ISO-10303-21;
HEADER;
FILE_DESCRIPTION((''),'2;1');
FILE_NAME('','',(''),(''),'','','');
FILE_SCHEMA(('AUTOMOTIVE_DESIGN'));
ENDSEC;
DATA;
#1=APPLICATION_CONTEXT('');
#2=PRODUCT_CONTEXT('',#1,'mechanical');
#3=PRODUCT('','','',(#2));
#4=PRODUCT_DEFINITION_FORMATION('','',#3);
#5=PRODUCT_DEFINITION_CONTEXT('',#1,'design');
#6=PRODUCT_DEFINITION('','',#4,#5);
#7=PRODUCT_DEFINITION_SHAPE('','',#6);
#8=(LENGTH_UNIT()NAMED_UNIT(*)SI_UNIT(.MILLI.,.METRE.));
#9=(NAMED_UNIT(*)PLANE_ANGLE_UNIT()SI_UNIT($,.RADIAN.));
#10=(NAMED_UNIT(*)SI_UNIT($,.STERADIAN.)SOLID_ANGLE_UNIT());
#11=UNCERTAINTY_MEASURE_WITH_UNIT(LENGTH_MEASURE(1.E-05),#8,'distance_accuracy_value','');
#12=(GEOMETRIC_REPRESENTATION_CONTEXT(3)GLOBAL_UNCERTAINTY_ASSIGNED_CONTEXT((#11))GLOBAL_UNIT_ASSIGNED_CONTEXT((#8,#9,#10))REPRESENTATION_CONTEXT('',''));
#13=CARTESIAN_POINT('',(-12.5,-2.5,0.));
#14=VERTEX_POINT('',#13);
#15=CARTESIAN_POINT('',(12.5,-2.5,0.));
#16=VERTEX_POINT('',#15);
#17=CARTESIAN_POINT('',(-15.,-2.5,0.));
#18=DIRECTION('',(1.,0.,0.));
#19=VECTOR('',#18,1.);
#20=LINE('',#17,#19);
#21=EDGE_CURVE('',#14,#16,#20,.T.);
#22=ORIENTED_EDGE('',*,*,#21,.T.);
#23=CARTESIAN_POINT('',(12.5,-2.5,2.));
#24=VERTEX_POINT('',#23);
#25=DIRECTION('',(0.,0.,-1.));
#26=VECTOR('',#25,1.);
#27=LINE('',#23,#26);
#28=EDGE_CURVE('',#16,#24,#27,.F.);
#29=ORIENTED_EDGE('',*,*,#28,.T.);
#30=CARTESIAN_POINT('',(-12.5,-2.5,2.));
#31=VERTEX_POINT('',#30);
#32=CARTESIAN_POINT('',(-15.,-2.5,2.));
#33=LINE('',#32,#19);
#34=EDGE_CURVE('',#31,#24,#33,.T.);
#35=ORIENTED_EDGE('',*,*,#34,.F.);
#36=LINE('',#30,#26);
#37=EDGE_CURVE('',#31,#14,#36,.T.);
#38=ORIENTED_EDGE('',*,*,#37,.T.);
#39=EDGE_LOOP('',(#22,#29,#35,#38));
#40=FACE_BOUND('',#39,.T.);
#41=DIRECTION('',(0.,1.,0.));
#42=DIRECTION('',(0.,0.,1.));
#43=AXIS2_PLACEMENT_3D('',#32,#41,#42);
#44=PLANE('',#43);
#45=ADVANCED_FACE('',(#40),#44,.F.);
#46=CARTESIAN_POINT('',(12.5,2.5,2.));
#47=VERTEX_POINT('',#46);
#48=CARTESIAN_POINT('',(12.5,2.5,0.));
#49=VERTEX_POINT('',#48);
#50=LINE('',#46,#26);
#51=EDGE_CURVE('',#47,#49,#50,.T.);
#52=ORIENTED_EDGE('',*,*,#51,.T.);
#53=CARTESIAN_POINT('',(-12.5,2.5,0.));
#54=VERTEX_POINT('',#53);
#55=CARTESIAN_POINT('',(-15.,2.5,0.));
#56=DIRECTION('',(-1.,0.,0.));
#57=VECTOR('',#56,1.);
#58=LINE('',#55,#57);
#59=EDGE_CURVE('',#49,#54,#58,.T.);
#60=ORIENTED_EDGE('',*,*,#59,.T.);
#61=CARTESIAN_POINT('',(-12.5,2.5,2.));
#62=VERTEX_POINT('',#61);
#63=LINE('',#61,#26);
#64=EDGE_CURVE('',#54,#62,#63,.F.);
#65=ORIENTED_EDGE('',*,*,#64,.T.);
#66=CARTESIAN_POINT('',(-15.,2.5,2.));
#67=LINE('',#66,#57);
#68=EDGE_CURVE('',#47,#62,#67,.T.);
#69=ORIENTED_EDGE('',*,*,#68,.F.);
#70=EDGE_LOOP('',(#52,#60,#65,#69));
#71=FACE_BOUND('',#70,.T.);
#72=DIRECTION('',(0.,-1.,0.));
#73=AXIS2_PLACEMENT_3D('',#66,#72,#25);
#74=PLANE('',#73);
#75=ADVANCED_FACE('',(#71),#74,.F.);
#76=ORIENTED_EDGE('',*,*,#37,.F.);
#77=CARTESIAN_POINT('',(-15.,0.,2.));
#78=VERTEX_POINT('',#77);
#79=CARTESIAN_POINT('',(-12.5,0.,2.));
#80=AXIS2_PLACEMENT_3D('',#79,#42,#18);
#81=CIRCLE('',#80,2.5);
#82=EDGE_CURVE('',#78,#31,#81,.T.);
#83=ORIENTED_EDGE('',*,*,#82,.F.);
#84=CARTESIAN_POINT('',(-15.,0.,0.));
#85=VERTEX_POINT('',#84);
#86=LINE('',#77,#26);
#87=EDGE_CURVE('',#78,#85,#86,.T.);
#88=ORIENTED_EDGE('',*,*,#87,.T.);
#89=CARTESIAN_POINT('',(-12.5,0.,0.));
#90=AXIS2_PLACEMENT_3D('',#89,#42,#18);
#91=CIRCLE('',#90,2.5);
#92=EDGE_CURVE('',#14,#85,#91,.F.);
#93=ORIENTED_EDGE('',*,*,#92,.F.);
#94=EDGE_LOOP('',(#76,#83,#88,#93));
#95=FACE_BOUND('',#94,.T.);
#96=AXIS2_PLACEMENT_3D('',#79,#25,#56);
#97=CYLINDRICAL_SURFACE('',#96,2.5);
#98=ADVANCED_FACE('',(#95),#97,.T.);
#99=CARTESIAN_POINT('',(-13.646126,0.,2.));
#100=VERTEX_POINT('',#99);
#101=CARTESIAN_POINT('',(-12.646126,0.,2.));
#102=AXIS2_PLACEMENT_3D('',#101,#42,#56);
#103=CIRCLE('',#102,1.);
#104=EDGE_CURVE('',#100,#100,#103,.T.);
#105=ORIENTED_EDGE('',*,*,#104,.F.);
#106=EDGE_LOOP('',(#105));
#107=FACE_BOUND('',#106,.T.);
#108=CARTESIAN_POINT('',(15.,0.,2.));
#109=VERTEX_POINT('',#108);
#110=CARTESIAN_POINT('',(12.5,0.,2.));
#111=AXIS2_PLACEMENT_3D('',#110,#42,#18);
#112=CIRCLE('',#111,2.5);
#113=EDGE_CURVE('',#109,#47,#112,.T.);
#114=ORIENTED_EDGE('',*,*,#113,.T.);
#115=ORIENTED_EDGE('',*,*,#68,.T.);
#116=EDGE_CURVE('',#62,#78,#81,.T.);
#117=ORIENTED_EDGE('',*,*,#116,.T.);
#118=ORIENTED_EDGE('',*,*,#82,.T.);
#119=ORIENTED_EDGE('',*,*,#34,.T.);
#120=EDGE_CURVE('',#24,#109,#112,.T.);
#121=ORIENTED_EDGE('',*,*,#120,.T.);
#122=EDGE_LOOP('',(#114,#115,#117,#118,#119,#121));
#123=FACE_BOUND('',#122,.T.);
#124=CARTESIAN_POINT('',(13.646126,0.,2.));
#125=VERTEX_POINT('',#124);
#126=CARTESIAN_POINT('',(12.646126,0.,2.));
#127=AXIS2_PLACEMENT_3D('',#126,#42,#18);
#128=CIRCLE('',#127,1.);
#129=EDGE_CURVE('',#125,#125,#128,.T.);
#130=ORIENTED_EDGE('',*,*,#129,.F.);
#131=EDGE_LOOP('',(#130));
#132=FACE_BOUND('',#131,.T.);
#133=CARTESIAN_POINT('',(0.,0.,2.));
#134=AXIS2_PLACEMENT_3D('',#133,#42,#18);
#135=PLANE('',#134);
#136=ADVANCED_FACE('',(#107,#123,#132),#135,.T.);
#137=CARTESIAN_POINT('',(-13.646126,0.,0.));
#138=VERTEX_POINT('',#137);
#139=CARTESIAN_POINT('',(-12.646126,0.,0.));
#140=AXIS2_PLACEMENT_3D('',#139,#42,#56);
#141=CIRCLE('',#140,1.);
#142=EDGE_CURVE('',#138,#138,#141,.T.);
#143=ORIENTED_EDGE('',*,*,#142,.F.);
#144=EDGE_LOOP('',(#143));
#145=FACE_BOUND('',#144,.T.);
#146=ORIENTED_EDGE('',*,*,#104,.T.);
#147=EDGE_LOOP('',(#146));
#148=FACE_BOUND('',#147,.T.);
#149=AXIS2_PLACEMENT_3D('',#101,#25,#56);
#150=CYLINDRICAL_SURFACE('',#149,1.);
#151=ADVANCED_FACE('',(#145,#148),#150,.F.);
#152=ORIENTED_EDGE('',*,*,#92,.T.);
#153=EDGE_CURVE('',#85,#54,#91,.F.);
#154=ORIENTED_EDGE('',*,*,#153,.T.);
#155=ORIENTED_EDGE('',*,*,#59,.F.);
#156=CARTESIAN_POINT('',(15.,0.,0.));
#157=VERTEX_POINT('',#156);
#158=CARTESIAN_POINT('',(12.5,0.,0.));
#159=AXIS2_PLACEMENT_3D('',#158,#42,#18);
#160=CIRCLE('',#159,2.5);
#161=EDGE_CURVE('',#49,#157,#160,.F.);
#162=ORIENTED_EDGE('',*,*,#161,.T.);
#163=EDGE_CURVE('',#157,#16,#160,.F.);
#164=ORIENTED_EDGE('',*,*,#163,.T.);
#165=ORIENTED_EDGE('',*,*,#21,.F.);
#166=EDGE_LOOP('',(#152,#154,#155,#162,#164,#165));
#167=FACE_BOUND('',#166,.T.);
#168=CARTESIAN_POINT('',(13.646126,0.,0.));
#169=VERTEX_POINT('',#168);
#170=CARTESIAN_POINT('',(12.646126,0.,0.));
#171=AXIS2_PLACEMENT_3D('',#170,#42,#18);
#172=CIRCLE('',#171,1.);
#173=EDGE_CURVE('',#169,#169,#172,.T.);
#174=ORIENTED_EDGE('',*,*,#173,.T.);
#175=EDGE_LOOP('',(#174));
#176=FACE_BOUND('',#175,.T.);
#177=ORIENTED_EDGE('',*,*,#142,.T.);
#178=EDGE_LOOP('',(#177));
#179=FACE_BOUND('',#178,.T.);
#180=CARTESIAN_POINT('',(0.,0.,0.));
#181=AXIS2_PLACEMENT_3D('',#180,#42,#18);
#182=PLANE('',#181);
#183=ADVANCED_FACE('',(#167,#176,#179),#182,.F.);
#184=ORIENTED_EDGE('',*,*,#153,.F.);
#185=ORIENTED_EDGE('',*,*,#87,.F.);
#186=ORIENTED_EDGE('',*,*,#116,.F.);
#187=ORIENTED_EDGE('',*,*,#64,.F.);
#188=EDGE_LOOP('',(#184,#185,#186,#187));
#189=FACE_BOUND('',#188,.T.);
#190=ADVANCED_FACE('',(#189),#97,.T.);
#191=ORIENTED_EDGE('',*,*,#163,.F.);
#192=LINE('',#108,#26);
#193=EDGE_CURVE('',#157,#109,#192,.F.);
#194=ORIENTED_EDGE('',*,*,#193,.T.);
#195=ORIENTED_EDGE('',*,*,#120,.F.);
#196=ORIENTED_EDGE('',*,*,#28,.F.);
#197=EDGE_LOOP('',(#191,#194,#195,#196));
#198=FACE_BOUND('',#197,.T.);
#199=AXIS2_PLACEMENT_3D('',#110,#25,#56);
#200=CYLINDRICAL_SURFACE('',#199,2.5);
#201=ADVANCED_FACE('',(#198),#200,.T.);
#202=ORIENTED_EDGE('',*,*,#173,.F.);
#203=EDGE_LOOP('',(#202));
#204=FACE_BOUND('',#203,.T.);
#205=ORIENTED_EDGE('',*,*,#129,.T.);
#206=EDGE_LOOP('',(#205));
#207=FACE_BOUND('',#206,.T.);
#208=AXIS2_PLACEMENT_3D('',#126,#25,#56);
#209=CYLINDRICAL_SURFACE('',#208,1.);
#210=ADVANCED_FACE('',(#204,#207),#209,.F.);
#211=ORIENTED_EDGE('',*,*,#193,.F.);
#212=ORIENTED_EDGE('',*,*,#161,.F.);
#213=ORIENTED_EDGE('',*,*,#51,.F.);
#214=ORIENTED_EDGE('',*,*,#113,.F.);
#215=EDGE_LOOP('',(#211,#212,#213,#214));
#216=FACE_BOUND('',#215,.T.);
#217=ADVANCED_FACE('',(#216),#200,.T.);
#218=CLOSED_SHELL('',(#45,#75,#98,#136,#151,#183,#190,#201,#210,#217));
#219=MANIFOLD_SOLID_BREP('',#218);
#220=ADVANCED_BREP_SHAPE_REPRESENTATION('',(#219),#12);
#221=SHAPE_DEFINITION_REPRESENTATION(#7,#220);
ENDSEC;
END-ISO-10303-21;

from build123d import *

# Parameters (mm, degrees)
SKETCH1_W           = 30
SKETCH1_H           = 5
SKETCH1_R           = 1
BOSS_EXTRUDE1_DEPTH = 2
FILLET1_R           = 2.5


with BuildPart() as part:
    # Sketch1 → Boss-Extrude1 (new body)
    with BuildSketch(Plane.XY):
        Rectangle(SKETCH1_W, SKETCH1_H)
        with Locations((12.646126356, 0)):
            Circle(SKETCH1_R, mode=Mode.SUBTRACT)
        with Locations(Location((-12.646126356, 0, 0), (0, 0, 180))):
            Circle(SKETCH1_R, mode=Mode.SUBTRACT)
    extrude(amount=BOSS_EXTRUDE1_DEPTH)

    # Fillet1
    fillet1_edges = [part.edges().sort_by_distance(p)[0] for p in [
        (-15, -2.5, 1),
        (-15, 2.5, 1),
        (15, -2.5, 1),
        (15, 2.5, 1),
    ]]
    fillet(fillet1_edges, radius=FILLET1_R - 0.0001)  # a hair under: the kernel refuses the full size


solid = part.part
